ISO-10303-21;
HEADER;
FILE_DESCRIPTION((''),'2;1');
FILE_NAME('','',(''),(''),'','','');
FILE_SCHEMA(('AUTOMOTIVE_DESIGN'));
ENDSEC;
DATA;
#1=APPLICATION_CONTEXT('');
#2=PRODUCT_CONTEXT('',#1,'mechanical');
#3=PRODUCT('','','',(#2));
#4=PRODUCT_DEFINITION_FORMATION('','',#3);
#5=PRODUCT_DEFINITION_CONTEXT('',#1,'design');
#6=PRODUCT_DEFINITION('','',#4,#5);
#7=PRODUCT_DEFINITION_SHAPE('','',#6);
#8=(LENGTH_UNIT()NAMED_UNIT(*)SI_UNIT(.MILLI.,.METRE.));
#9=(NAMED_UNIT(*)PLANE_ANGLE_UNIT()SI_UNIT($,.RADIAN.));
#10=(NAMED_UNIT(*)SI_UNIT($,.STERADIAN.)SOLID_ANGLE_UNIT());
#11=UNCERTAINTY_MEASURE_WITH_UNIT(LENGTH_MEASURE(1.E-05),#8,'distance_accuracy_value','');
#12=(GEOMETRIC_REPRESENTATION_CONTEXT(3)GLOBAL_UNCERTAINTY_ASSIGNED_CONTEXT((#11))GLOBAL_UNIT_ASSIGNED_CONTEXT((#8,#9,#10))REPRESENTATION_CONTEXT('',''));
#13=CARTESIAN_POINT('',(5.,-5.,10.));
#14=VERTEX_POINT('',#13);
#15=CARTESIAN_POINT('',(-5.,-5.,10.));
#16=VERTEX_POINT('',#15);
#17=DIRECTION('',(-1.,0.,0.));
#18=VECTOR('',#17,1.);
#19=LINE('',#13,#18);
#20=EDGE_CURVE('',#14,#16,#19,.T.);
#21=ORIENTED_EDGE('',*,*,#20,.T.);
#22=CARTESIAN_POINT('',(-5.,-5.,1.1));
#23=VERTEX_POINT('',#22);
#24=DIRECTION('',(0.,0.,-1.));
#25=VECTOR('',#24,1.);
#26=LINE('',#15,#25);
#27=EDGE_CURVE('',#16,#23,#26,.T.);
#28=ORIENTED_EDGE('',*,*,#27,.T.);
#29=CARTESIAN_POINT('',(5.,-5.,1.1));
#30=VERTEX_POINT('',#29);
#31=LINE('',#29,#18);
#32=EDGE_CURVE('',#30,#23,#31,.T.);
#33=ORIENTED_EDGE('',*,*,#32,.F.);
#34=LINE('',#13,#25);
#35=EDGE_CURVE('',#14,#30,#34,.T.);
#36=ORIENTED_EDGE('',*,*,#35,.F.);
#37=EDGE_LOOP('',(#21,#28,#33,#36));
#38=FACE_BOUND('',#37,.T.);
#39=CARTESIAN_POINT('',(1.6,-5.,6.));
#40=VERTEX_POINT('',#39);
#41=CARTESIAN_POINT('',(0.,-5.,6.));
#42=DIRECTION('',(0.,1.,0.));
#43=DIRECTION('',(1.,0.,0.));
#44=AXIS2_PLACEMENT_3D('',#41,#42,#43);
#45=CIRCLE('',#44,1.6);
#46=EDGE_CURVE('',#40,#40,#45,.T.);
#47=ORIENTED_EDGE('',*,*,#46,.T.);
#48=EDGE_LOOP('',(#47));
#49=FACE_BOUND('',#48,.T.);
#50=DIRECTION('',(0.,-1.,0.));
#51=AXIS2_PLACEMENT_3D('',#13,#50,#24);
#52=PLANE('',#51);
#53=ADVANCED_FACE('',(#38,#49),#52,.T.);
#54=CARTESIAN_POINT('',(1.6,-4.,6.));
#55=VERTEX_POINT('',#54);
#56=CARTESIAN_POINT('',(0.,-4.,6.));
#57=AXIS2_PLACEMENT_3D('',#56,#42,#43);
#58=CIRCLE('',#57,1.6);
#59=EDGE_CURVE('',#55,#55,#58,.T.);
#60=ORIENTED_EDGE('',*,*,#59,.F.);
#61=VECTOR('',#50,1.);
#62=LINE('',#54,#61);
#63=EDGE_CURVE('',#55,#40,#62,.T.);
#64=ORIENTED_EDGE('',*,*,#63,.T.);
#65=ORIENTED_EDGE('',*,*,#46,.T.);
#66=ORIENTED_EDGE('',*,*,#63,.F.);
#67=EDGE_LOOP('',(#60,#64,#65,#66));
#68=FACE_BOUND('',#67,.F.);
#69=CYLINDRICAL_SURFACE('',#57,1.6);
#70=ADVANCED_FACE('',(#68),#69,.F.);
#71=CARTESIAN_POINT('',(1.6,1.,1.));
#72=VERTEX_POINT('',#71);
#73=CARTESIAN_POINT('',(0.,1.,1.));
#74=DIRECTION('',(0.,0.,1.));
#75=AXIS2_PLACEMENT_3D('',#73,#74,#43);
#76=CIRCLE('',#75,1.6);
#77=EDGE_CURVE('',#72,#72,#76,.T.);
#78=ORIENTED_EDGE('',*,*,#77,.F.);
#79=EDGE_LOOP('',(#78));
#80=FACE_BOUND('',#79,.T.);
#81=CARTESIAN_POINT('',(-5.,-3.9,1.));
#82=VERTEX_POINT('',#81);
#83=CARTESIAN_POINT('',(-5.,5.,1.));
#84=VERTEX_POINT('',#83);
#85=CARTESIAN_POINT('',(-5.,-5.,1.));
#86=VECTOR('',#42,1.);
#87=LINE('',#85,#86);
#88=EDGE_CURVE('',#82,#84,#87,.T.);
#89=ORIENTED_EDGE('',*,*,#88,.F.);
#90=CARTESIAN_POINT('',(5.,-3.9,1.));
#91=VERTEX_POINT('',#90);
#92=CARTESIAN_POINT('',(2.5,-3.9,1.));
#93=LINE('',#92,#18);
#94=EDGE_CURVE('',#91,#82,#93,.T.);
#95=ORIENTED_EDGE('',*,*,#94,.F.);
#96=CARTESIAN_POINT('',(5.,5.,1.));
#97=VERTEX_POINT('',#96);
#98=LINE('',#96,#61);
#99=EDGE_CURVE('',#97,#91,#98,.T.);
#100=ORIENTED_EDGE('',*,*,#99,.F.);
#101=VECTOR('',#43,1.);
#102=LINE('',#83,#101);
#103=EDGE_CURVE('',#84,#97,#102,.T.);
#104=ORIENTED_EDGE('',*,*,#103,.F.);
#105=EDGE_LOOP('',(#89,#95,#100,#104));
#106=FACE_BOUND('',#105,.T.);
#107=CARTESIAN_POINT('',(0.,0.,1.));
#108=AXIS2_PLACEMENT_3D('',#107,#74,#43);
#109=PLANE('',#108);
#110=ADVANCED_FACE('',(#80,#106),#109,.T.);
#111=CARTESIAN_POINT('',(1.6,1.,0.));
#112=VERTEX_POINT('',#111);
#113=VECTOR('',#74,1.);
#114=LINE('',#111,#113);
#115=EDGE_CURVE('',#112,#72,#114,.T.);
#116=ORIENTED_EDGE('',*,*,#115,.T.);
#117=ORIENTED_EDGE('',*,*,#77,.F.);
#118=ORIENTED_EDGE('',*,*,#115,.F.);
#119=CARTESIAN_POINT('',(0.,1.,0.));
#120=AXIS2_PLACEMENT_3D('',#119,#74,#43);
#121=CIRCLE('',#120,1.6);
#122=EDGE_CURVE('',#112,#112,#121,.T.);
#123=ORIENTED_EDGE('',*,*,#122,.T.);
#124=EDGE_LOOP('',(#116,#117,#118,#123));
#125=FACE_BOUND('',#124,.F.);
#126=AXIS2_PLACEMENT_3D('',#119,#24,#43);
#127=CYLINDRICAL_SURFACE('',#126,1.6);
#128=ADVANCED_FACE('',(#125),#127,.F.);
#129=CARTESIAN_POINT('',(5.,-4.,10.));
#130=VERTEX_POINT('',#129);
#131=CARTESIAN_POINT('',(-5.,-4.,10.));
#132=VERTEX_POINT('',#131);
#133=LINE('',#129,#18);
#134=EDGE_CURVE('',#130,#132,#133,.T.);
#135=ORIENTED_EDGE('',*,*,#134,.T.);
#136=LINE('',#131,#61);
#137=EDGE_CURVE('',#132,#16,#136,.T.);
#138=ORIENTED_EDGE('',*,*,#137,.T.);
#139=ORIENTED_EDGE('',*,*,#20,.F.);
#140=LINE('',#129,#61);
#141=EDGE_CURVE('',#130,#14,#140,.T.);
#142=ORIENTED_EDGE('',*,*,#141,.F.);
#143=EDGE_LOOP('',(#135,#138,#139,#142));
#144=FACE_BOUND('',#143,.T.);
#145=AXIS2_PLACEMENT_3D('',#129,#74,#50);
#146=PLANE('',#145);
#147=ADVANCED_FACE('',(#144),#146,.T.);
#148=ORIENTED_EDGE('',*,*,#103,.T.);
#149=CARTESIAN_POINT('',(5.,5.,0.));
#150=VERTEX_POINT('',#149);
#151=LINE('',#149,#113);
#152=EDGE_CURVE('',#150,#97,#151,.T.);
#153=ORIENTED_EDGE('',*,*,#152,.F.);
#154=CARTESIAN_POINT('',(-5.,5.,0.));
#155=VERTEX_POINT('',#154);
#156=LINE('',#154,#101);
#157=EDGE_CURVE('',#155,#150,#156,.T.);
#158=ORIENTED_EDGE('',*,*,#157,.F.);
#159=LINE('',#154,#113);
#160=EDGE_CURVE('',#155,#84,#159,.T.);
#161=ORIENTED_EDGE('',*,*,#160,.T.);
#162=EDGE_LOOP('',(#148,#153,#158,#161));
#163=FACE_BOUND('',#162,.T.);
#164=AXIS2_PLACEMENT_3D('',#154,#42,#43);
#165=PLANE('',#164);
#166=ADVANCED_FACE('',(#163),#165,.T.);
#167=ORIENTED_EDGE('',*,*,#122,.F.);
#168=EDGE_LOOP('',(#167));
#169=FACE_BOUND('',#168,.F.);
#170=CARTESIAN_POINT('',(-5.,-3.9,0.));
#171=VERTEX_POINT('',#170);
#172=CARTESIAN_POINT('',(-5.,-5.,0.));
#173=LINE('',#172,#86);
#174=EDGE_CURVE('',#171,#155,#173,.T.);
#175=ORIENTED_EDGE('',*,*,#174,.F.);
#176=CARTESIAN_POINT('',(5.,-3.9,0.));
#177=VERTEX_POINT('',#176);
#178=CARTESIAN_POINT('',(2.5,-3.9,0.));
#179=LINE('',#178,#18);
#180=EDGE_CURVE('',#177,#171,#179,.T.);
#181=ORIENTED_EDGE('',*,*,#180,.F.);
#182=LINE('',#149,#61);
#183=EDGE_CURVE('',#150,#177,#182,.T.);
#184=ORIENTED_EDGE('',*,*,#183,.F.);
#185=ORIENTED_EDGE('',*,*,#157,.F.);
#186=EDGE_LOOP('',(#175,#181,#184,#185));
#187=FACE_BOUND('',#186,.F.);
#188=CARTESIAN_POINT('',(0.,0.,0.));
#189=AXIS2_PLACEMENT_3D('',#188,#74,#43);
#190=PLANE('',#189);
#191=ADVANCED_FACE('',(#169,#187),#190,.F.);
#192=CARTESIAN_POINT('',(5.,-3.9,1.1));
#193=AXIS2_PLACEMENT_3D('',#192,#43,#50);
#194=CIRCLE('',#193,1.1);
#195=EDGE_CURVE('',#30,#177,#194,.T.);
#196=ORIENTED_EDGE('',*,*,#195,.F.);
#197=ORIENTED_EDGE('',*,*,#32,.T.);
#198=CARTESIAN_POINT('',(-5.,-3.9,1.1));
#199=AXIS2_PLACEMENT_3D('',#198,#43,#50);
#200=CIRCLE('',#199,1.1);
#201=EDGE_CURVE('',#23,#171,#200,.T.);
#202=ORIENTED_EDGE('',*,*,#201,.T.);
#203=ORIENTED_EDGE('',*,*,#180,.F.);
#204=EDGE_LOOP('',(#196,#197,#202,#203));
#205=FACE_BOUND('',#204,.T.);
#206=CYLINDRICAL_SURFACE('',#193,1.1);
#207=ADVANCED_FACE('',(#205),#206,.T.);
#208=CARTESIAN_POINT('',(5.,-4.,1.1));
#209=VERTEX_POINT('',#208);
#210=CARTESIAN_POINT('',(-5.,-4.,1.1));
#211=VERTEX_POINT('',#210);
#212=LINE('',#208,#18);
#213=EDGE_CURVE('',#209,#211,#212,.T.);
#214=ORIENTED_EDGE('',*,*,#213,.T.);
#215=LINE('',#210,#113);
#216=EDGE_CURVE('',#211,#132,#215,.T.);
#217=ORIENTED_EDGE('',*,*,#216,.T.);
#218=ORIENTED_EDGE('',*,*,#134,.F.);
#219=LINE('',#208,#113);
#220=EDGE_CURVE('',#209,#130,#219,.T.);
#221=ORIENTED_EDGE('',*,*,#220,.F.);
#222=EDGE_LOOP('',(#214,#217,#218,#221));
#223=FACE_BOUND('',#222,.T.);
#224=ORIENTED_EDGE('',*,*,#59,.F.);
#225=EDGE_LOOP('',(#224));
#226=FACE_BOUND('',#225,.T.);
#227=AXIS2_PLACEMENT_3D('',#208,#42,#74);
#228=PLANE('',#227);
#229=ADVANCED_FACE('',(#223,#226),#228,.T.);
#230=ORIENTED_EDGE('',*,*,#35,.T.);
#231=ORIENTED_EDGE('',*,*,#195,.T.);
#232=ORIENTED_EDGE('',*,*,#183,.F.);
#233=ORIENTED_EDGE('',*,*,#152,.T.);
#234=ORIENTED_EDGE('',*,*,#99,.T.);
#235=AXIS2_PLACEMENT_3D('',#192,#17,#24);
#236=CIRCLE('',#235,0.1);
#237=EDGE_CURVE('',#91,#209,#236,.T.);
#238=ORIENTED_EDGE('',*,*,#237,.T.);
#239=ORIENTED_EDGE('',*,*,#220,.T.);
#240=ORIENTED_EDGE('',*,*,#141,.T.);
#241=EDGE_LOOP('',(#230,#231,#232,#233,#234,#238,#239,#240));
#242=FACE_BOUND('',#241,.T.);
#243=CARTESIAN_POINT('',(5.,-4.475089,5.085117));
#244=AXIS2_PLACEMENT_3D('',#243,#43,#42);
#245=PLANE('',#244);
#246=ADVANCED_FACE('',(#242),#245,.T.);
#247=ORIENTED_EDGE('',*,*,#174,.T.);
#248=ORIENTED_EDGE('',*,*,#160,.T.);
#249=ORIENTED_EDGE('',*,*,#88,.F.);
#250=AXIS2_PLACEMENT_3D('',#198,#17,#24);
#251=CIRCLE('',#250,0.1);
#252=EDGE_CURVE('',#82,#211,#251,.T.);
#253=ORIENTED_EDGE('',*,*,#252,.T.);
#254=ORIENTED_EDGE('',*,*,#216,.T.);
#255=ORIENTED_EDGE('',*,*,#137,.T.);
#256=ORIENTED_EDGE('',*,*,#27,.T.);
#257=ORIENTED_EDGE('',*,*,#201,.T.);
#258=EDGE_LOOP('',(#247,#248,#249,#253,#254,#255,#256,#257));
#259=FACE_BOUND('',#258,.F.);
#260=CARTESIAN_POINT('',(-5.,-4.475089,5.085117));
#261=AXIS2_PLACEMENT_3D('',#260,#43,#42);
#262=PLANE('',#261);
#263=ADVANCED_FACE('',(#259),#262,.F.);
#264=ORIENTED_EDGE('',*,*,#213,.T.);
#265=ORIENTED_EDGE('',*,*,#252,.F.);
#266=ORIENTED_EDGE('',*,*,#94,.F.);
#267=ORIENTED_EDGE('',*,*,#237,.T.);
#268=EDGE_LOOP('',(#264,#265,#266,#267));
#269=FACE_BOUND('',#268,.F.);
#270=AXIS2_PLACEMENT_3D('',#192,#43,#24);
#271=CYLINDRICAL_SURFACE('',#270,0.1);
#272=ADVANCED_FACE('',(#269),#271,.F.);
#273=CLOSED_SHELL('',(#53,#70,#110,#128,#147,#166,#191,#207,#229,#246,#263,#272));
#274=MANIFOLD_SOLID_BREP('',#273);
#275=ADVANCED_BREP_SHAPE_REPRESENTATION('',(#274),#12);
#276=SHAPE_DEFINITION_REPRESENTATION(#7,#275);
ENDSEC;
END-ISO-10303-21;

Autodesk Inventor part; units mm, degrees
ref_plane "YZ Plane" through (0, 0, 0) normal (1, 0, 0) x (0, 1, 0)
ref_plane "XZ Plane" through (0, 0, 0) normal (0, 1, 0) x (-1, 0, 0)
ref_plane "XY Plane" through (0, 0, 0) normal (0, 0, 1) x (1, 0, 0)
sketch "Sketch1" plane through (0, 0, 0) normal (0, 0, 1) x (1, 0, 0)
  line L0 (-5, 5) -> (5, 5)
  line L1 (5, 5) -> (5, -5)
  line L2 (5, -5) -> (-5, -5)
  line L3 (-5, -5) -> (-5, 5)
  line L4 (-5, 5) -> (5, -5) construction
  line L5 (5, 5) -> (-5, -5) construction
  circle A0 centre (0, 1) radius 1.6
  point P0 (0, 0)
  dimension "d0" = 10
  dimension "d1" = 10
  dimension "d3" = 3.2
  dimension "d21" = 4
extrude "Plate1" add sketch "Sketch1" along normal blind 1
sketch "Sketch2" plane through (5, -4, 0) normal (0, -1, 0) x (1, 0, 0)
  line L0 (-10, 0) -> (0, 0)
  line L1 (0, 0) -> (0, 10)
  line L2 (0, 10) -> (-10, 10)
  line L3 (-10, 10) -> (-10, 0)
edge flange "Flange1" height 10 angle 90 thickness 1 bend radius 0.1 thickness toward (0, -1, 0) relief tear relief width 1 relief depth 0.5 edges at (0, -5, 1) wall of the first edge with corners at (-5, -4, 0) (5, -4, 0) (5, -4, 10) (-5, -4, 10)
bend "Bend1"
corner "Corner1"
sketch "Sketch3" plane through (-5, -4, 10) normal (0, 1, 0) x (1, 0, 0)
  circle A0 centre (5, 4) radius 1.6
  line L0 (0, 9) -> (10, 9) projected
  line L1 (0, 0) -> (10, 0) projected
  point P0 (5, 10)
  point P1 (5, 0)
  dimension "d17" = 3.2
  dimension "d22" = 4
extrude "Cut1" cut sketch "Sketch3" against normal blind 1
equation "\"d19\" = 厚度"
equation "\"d6\" = 厚度"
equation "\"d7\" = 折彎離隙寬度"
equation "\"d8\" = 折彎離隙深度"
equation "\"d9\" = 最小剩餘"
equation "\"d10\" = 轉移半徑"
equation "\"d14\" = 轉角離隙大小"
equation "\"d15\" = 間隙大小"
equation "\"d16\" = Jacobi半徑大小"
equation "\"折彎半徑\" = 厚度"
equation "\"折彎離隙寬度\" = 厚度"
equation "\"折彎離隙深度\" = 0.5 * 厚度"
equation "\"轉角離隙大小\" = 4 * 厚度"
equation "\"最小剩餘\" = 2 * 厚度"
equation "\"轉移半徑\" = 折彎半徑"
equation "\"Jacobi半徑大小\" = 折彎半徑"
equation "\"間隙大小\" = 厚度"
equation "\"厚度\" = 1"
properties part number "connector" material "Aluminum"
